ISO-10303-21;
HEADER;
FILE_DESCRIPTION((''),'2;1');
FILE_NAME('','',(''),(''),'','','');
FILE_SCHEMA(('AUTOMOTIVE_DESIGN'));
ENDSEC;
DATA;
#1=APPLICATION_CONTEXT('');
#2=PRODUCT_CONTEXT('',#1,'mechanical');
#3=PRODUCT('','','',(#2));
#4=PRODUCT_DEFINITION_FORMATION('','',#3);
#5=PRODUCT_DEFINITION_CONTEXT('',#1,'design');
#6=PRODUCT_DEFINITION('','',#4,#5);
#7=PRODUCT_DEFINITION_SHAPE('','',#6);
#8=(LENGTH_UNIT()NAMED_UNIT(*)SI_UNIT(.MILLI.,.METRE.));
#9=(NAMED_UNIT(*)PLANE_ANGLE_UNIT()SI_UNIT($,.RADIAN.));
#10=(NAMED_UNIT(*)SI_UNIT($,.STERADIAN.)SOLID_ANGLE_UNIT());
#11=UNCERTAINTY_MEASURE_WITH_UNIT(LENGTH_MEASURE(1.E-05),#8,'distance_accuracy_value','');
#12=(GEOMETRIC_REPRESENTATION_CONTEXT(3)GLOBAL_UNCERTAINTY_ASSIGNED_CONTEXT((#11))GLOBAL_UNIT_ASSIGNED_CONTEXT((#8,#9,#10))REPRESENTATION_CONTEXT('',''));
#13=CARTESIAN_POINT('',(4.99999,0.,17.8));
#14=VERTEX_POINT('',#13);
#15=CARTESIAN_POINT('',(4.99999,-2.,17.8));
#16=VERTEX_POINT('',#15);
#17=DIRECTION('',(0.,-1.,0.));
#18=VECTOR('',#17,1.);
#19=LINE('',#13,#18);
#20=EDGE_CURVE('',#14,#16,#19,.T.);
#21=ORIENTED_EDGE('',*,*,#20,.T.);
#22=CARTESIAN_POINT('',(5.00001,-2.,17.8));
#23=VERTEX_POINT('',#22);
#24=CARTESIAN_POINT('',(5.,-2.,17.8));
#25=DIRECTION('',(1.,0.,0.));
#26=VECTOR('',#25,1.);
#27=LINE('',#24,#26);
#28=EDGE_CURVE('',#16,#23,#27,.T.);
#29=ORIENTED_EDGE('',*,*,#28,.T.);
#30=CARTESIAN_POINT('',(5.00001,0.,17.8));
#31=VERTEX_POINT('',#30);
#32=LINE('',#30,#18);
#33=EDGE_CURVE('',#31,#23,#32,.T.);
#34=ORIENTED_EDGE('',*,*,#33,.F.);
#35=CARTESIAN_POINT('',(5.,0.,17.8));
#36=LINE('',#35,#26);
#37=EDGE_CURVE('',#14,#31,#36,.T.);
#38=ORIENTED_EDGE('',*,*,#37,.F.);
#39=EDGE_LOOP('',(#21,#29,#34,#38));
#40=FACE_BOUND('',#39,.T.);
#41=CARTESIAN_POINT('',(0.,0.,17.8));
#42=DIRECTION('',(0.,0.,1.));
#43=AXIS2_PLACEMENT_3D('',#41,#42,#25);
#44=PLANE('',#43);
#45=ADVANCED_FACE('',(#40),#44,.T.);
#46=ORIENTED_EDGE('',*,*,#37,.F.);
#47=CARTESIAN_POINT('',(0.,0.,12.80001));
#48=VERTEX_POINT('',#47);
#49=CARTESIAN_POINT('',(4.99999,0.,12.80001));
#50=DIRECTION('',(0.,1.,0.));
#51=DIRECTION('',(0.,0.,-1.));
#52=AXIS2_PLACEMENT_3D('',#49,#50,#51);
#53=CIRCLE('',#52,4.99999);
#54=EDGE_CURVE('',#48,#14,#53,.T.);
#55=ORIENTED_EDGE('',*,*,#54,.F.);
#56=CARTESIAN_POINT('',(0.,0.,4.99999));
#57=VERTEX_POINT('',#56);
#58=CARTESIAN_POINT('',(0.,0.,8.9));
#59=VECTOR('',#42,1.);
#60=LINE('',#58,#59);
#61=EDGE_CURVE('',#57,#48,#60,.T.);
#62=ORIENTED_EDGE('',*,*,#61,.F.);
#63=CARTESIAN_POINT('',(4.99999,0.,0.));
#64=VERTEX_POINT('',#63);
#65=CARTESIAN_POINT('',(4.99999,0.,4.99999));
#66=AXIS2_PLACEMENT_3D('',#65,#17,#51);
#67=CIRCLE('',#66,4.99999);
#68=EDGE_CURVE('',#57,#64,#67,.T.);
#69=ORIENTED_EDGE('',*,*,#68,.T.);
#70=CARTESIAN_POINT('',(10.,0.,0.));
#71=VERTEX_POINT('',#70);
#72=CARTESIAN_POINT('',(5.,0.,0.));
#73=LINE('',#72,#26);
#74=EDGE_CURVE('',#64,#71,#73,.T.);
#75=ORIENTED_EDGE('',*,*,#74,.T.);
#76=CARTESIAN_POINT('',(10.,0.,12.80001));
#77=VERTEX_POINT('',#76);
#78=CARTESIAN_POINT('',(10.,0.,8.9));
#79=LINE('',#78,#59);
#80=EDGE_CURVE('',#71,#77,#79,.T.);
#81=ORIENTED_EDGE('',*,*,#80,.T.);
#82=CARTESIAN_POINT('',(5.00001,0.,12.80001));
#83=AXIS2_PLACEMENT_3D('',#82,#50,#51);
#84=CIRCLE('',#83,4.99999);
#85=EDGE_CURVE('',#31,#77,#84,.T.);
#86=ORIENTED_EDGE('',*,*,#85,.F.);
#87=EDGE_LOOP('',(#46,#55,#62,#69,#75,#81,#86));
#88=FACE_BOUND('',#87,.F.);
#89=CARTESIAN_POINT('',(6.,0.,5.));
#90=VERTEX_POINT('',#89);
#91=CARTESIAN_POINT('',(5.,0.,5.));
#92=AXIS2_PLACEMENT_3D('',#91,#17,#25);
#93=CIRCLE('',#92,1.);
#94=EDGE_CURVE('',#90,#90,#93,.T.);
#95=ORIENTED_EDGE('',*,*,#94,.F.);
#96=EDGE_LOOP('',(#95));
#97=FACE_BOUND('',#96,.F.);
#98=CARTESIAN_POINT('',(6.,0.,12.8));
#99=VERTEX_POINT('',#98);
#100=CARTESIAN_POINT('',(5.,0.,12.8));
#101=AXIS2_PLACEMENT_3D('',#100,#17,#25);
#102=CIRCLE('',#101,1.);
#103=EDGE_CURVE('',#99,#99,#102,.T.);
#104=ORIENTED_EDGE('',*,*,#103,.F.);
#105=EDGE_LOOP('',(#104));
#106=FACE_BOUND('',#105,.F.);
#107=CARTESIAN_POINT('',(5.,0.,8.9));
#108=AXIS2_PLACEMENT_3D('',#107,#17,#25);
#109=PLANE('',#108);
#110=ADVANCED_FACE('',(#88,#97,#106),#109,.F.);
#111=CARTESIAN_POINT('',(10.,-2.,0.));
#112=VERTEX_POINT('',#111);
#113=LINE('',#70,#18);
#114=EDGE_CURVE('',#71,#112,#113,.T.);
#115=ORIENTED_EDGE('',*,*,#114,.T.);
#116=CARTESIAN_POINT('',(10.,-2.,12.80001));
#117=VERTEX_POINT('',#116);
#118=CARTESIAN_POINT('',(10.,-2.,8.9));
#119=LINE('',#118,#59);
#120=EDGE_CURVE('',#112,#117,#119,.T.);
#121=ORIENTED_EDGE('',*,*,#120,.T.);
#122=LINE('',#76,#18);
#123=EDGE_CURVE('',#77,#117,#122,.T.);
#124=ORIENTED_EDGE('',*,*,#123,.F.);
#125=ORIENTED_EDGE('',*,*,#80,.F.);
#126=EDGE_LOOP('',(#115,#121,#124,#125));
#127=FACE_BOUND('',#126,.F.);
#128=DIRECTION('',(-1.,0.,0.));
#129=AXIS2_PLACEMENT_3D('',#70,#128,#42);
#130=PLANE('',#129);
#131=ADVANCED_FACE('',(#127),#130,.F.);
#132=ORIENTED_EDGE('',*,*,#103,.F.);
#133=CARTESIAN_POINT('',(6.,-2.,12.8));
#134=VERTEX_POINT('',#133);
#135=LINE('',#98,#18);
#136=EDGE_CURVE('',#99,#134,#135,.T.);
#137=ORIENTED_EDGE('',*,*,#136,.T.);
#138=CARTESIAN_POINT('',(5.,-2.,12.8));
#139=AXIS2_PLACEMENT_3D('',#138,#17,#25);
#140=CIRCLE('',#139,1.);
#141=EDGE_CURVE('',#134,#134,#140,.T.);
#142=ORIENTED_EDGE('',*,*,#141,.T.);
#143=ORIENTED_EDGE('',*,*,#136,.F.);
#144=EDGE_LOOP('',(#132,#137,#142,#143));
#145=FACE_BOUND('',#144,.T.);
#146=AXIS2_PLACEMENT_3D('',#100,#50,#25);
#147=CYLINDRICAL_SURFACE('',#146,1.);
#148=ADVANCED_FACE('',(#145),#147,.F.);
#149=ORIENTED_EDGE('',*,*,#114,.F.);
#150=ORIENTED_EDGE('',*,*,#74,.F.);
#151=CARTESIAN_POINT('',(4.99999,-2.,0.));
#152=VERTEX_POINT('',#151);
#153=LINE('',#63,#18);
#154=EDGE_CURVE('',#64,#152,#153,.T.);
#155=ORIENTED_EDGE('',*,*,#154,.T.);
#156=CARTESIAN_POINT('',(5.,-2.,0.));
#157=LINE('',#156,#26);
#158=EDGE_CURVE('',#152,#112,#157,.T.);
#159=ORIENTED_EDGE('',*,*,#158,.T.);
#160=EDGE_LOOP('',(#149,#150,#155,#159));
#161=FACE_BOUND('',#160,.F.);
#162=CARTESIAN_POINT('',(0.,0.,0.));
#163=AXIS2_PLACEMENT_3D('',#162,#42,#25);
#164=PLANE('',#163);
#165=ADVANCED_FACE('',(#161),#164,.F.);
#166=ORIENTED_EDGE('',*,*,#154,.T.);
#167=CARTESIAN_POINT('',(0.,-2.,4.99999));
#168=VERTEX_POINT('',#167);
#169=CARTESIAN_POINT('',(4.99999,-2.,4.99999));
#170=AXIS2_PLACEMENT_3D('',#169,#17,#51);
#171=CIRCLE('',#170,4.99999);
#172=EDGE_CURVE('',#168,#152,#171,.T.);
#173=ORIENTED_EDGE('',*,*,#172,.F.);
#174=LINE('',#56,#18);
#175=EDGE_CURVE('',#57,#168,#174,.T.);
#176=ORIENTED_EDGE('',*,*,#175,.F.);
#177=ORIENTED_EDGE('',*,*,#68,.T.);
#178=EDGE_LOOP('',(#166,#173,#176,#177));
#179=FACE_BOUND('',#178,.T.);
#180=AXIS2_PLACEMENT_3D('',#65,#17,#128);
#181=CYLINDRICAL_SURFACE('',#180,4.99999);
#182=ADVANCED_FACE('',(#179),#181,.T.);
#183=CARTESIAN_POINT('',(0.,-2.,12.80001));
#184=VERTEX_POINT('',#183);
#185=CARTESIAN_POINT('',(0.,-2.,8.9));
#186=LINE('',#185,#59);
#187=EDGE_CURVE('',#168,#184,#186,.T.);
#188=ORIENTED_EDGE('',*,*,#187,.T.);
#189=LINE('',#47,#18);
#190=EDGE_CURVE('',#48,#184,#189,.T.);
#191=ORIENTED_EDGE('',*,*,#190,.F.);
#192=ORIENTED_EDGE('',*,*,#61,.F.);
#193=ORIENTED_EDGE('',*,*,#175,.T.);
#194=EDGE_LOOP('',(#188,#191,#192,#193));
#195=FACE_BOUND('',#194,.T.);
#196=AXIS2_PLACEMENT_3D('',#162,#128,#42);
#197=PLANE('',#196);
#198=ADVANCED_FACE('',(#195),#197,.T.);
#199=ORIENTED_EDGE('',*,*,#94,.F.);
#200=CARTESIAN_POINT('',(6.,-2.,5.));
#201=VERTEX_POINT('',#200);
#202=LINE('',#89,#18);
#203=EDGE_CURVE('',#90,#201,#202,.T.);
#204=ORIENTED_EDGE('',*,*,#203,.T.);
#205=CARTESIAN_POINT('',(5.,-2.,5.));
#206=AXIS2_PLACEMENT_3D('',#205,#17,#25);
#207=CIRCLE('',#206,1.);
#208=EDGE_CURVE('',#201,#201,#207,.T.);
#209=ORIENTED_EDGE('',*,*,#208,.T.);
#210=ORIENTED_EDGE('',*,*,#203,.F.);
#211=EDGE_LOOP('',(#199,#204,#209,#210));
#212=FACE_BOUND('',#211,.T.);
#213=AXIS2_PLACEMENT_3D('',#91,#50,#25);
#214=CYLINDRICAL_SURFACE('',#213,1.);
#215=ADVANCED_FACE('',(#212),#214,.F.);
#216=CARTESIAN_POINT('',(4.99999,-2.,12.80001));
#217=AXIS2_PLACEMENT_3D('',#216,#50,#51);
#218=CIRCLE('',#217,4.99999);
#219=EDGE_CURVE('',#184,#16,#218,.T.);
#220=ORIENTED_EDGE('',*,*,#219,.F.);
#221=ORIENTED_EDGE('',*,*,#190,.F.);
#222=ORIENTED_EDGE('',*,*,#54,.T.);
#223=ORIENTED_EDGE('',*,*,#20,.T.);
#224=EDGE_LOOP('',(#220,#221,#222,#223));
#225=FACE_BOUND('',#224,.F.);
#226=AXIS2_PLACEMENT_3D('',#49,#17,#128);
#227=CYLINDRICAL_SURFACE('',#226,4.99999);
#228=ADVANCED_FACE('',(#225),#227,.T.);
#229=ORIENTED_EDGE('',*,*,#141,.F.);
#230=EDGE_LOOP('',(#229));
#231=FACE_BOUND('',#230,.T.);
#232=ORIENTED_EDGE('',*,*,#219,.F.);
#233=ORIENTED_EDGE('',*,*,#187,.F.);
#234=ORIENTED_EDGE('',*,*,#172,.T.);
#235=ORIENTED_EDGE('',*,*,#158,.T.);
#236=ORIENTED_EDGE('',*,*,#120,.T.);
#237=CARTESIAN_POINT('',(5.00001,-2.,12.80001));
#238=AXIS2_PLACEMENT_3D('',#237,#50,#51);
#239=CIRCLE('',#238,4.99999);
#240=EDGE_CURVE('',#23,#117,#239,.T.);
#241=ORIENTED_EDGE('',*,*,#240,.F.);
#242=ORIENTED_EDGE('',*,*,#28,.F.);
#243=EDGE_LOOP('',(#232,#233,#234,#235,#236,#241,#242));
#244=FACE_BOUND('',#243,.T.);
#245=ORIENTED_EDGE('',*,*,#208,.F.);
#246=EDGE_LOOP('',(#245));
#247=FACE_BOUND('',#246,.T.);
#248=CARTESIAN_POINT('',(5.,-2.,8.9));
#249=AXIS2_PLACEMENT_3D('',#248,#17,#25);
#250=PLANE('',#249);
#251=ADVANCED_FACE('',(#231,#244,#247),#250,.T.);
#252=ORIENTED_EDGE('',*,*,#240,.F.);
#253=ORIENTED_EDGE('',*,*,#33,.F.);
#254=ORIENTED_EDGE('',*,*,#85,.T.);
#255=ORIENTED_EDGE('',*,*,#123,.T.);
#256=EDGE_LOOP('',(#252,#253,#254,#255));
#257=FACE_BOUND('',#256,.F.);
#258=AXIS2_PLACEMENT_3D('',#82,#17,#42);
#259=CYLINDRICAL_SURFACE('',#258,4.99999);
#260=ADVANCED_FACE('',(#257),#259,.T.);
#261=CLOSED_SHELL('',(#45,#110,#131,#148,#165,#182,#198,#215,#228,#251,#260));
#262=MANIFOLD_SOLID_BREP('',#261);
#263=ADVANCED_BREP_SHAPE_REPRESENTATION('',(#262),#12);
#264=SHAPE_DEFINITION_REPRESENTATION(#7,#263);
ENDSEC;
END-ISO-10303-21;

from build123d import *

# Parameters (mm, degrees)
F0_W     = 10
F0_H     = 17.8
F0_R     = 1
F1_DEPTH = 2
F2_R     = 4.99999


# Not quite as in the source:
# - a fillet or chamfer is up to 0.001 mm smaller than in the source, because OpenCascade refuses the exact size


with BuildPart() as f1:
    # F0 (on Front) → F1 (new body)
    with BuildSketch(Plane.XZ):
        with Locations((5, 8.9)):
            Rectangle(F0_W, F0_H)
        with Locations((5, 5)):
            Circle(F0_R, mode=Mode.SUBTRACT)
        with Locations((5, 12.8)):
            Circle(F0_R, mode=Mode.SUBTRACT)
    extrude(amount=F1_DEPTH)

    # F2 (radius 5 in the source; OpenCascade refuses exactly that, so slightly less here)
    f2_edges = [f1.edges().sort_by_distance(p)[0] for p in [
        (0, -1, 17.8),
        (10, -1, 17.8),
        (0, -1, 0),
    ]]
    fillet(f2_edges, radius=F2_R)


solid = f1.part
